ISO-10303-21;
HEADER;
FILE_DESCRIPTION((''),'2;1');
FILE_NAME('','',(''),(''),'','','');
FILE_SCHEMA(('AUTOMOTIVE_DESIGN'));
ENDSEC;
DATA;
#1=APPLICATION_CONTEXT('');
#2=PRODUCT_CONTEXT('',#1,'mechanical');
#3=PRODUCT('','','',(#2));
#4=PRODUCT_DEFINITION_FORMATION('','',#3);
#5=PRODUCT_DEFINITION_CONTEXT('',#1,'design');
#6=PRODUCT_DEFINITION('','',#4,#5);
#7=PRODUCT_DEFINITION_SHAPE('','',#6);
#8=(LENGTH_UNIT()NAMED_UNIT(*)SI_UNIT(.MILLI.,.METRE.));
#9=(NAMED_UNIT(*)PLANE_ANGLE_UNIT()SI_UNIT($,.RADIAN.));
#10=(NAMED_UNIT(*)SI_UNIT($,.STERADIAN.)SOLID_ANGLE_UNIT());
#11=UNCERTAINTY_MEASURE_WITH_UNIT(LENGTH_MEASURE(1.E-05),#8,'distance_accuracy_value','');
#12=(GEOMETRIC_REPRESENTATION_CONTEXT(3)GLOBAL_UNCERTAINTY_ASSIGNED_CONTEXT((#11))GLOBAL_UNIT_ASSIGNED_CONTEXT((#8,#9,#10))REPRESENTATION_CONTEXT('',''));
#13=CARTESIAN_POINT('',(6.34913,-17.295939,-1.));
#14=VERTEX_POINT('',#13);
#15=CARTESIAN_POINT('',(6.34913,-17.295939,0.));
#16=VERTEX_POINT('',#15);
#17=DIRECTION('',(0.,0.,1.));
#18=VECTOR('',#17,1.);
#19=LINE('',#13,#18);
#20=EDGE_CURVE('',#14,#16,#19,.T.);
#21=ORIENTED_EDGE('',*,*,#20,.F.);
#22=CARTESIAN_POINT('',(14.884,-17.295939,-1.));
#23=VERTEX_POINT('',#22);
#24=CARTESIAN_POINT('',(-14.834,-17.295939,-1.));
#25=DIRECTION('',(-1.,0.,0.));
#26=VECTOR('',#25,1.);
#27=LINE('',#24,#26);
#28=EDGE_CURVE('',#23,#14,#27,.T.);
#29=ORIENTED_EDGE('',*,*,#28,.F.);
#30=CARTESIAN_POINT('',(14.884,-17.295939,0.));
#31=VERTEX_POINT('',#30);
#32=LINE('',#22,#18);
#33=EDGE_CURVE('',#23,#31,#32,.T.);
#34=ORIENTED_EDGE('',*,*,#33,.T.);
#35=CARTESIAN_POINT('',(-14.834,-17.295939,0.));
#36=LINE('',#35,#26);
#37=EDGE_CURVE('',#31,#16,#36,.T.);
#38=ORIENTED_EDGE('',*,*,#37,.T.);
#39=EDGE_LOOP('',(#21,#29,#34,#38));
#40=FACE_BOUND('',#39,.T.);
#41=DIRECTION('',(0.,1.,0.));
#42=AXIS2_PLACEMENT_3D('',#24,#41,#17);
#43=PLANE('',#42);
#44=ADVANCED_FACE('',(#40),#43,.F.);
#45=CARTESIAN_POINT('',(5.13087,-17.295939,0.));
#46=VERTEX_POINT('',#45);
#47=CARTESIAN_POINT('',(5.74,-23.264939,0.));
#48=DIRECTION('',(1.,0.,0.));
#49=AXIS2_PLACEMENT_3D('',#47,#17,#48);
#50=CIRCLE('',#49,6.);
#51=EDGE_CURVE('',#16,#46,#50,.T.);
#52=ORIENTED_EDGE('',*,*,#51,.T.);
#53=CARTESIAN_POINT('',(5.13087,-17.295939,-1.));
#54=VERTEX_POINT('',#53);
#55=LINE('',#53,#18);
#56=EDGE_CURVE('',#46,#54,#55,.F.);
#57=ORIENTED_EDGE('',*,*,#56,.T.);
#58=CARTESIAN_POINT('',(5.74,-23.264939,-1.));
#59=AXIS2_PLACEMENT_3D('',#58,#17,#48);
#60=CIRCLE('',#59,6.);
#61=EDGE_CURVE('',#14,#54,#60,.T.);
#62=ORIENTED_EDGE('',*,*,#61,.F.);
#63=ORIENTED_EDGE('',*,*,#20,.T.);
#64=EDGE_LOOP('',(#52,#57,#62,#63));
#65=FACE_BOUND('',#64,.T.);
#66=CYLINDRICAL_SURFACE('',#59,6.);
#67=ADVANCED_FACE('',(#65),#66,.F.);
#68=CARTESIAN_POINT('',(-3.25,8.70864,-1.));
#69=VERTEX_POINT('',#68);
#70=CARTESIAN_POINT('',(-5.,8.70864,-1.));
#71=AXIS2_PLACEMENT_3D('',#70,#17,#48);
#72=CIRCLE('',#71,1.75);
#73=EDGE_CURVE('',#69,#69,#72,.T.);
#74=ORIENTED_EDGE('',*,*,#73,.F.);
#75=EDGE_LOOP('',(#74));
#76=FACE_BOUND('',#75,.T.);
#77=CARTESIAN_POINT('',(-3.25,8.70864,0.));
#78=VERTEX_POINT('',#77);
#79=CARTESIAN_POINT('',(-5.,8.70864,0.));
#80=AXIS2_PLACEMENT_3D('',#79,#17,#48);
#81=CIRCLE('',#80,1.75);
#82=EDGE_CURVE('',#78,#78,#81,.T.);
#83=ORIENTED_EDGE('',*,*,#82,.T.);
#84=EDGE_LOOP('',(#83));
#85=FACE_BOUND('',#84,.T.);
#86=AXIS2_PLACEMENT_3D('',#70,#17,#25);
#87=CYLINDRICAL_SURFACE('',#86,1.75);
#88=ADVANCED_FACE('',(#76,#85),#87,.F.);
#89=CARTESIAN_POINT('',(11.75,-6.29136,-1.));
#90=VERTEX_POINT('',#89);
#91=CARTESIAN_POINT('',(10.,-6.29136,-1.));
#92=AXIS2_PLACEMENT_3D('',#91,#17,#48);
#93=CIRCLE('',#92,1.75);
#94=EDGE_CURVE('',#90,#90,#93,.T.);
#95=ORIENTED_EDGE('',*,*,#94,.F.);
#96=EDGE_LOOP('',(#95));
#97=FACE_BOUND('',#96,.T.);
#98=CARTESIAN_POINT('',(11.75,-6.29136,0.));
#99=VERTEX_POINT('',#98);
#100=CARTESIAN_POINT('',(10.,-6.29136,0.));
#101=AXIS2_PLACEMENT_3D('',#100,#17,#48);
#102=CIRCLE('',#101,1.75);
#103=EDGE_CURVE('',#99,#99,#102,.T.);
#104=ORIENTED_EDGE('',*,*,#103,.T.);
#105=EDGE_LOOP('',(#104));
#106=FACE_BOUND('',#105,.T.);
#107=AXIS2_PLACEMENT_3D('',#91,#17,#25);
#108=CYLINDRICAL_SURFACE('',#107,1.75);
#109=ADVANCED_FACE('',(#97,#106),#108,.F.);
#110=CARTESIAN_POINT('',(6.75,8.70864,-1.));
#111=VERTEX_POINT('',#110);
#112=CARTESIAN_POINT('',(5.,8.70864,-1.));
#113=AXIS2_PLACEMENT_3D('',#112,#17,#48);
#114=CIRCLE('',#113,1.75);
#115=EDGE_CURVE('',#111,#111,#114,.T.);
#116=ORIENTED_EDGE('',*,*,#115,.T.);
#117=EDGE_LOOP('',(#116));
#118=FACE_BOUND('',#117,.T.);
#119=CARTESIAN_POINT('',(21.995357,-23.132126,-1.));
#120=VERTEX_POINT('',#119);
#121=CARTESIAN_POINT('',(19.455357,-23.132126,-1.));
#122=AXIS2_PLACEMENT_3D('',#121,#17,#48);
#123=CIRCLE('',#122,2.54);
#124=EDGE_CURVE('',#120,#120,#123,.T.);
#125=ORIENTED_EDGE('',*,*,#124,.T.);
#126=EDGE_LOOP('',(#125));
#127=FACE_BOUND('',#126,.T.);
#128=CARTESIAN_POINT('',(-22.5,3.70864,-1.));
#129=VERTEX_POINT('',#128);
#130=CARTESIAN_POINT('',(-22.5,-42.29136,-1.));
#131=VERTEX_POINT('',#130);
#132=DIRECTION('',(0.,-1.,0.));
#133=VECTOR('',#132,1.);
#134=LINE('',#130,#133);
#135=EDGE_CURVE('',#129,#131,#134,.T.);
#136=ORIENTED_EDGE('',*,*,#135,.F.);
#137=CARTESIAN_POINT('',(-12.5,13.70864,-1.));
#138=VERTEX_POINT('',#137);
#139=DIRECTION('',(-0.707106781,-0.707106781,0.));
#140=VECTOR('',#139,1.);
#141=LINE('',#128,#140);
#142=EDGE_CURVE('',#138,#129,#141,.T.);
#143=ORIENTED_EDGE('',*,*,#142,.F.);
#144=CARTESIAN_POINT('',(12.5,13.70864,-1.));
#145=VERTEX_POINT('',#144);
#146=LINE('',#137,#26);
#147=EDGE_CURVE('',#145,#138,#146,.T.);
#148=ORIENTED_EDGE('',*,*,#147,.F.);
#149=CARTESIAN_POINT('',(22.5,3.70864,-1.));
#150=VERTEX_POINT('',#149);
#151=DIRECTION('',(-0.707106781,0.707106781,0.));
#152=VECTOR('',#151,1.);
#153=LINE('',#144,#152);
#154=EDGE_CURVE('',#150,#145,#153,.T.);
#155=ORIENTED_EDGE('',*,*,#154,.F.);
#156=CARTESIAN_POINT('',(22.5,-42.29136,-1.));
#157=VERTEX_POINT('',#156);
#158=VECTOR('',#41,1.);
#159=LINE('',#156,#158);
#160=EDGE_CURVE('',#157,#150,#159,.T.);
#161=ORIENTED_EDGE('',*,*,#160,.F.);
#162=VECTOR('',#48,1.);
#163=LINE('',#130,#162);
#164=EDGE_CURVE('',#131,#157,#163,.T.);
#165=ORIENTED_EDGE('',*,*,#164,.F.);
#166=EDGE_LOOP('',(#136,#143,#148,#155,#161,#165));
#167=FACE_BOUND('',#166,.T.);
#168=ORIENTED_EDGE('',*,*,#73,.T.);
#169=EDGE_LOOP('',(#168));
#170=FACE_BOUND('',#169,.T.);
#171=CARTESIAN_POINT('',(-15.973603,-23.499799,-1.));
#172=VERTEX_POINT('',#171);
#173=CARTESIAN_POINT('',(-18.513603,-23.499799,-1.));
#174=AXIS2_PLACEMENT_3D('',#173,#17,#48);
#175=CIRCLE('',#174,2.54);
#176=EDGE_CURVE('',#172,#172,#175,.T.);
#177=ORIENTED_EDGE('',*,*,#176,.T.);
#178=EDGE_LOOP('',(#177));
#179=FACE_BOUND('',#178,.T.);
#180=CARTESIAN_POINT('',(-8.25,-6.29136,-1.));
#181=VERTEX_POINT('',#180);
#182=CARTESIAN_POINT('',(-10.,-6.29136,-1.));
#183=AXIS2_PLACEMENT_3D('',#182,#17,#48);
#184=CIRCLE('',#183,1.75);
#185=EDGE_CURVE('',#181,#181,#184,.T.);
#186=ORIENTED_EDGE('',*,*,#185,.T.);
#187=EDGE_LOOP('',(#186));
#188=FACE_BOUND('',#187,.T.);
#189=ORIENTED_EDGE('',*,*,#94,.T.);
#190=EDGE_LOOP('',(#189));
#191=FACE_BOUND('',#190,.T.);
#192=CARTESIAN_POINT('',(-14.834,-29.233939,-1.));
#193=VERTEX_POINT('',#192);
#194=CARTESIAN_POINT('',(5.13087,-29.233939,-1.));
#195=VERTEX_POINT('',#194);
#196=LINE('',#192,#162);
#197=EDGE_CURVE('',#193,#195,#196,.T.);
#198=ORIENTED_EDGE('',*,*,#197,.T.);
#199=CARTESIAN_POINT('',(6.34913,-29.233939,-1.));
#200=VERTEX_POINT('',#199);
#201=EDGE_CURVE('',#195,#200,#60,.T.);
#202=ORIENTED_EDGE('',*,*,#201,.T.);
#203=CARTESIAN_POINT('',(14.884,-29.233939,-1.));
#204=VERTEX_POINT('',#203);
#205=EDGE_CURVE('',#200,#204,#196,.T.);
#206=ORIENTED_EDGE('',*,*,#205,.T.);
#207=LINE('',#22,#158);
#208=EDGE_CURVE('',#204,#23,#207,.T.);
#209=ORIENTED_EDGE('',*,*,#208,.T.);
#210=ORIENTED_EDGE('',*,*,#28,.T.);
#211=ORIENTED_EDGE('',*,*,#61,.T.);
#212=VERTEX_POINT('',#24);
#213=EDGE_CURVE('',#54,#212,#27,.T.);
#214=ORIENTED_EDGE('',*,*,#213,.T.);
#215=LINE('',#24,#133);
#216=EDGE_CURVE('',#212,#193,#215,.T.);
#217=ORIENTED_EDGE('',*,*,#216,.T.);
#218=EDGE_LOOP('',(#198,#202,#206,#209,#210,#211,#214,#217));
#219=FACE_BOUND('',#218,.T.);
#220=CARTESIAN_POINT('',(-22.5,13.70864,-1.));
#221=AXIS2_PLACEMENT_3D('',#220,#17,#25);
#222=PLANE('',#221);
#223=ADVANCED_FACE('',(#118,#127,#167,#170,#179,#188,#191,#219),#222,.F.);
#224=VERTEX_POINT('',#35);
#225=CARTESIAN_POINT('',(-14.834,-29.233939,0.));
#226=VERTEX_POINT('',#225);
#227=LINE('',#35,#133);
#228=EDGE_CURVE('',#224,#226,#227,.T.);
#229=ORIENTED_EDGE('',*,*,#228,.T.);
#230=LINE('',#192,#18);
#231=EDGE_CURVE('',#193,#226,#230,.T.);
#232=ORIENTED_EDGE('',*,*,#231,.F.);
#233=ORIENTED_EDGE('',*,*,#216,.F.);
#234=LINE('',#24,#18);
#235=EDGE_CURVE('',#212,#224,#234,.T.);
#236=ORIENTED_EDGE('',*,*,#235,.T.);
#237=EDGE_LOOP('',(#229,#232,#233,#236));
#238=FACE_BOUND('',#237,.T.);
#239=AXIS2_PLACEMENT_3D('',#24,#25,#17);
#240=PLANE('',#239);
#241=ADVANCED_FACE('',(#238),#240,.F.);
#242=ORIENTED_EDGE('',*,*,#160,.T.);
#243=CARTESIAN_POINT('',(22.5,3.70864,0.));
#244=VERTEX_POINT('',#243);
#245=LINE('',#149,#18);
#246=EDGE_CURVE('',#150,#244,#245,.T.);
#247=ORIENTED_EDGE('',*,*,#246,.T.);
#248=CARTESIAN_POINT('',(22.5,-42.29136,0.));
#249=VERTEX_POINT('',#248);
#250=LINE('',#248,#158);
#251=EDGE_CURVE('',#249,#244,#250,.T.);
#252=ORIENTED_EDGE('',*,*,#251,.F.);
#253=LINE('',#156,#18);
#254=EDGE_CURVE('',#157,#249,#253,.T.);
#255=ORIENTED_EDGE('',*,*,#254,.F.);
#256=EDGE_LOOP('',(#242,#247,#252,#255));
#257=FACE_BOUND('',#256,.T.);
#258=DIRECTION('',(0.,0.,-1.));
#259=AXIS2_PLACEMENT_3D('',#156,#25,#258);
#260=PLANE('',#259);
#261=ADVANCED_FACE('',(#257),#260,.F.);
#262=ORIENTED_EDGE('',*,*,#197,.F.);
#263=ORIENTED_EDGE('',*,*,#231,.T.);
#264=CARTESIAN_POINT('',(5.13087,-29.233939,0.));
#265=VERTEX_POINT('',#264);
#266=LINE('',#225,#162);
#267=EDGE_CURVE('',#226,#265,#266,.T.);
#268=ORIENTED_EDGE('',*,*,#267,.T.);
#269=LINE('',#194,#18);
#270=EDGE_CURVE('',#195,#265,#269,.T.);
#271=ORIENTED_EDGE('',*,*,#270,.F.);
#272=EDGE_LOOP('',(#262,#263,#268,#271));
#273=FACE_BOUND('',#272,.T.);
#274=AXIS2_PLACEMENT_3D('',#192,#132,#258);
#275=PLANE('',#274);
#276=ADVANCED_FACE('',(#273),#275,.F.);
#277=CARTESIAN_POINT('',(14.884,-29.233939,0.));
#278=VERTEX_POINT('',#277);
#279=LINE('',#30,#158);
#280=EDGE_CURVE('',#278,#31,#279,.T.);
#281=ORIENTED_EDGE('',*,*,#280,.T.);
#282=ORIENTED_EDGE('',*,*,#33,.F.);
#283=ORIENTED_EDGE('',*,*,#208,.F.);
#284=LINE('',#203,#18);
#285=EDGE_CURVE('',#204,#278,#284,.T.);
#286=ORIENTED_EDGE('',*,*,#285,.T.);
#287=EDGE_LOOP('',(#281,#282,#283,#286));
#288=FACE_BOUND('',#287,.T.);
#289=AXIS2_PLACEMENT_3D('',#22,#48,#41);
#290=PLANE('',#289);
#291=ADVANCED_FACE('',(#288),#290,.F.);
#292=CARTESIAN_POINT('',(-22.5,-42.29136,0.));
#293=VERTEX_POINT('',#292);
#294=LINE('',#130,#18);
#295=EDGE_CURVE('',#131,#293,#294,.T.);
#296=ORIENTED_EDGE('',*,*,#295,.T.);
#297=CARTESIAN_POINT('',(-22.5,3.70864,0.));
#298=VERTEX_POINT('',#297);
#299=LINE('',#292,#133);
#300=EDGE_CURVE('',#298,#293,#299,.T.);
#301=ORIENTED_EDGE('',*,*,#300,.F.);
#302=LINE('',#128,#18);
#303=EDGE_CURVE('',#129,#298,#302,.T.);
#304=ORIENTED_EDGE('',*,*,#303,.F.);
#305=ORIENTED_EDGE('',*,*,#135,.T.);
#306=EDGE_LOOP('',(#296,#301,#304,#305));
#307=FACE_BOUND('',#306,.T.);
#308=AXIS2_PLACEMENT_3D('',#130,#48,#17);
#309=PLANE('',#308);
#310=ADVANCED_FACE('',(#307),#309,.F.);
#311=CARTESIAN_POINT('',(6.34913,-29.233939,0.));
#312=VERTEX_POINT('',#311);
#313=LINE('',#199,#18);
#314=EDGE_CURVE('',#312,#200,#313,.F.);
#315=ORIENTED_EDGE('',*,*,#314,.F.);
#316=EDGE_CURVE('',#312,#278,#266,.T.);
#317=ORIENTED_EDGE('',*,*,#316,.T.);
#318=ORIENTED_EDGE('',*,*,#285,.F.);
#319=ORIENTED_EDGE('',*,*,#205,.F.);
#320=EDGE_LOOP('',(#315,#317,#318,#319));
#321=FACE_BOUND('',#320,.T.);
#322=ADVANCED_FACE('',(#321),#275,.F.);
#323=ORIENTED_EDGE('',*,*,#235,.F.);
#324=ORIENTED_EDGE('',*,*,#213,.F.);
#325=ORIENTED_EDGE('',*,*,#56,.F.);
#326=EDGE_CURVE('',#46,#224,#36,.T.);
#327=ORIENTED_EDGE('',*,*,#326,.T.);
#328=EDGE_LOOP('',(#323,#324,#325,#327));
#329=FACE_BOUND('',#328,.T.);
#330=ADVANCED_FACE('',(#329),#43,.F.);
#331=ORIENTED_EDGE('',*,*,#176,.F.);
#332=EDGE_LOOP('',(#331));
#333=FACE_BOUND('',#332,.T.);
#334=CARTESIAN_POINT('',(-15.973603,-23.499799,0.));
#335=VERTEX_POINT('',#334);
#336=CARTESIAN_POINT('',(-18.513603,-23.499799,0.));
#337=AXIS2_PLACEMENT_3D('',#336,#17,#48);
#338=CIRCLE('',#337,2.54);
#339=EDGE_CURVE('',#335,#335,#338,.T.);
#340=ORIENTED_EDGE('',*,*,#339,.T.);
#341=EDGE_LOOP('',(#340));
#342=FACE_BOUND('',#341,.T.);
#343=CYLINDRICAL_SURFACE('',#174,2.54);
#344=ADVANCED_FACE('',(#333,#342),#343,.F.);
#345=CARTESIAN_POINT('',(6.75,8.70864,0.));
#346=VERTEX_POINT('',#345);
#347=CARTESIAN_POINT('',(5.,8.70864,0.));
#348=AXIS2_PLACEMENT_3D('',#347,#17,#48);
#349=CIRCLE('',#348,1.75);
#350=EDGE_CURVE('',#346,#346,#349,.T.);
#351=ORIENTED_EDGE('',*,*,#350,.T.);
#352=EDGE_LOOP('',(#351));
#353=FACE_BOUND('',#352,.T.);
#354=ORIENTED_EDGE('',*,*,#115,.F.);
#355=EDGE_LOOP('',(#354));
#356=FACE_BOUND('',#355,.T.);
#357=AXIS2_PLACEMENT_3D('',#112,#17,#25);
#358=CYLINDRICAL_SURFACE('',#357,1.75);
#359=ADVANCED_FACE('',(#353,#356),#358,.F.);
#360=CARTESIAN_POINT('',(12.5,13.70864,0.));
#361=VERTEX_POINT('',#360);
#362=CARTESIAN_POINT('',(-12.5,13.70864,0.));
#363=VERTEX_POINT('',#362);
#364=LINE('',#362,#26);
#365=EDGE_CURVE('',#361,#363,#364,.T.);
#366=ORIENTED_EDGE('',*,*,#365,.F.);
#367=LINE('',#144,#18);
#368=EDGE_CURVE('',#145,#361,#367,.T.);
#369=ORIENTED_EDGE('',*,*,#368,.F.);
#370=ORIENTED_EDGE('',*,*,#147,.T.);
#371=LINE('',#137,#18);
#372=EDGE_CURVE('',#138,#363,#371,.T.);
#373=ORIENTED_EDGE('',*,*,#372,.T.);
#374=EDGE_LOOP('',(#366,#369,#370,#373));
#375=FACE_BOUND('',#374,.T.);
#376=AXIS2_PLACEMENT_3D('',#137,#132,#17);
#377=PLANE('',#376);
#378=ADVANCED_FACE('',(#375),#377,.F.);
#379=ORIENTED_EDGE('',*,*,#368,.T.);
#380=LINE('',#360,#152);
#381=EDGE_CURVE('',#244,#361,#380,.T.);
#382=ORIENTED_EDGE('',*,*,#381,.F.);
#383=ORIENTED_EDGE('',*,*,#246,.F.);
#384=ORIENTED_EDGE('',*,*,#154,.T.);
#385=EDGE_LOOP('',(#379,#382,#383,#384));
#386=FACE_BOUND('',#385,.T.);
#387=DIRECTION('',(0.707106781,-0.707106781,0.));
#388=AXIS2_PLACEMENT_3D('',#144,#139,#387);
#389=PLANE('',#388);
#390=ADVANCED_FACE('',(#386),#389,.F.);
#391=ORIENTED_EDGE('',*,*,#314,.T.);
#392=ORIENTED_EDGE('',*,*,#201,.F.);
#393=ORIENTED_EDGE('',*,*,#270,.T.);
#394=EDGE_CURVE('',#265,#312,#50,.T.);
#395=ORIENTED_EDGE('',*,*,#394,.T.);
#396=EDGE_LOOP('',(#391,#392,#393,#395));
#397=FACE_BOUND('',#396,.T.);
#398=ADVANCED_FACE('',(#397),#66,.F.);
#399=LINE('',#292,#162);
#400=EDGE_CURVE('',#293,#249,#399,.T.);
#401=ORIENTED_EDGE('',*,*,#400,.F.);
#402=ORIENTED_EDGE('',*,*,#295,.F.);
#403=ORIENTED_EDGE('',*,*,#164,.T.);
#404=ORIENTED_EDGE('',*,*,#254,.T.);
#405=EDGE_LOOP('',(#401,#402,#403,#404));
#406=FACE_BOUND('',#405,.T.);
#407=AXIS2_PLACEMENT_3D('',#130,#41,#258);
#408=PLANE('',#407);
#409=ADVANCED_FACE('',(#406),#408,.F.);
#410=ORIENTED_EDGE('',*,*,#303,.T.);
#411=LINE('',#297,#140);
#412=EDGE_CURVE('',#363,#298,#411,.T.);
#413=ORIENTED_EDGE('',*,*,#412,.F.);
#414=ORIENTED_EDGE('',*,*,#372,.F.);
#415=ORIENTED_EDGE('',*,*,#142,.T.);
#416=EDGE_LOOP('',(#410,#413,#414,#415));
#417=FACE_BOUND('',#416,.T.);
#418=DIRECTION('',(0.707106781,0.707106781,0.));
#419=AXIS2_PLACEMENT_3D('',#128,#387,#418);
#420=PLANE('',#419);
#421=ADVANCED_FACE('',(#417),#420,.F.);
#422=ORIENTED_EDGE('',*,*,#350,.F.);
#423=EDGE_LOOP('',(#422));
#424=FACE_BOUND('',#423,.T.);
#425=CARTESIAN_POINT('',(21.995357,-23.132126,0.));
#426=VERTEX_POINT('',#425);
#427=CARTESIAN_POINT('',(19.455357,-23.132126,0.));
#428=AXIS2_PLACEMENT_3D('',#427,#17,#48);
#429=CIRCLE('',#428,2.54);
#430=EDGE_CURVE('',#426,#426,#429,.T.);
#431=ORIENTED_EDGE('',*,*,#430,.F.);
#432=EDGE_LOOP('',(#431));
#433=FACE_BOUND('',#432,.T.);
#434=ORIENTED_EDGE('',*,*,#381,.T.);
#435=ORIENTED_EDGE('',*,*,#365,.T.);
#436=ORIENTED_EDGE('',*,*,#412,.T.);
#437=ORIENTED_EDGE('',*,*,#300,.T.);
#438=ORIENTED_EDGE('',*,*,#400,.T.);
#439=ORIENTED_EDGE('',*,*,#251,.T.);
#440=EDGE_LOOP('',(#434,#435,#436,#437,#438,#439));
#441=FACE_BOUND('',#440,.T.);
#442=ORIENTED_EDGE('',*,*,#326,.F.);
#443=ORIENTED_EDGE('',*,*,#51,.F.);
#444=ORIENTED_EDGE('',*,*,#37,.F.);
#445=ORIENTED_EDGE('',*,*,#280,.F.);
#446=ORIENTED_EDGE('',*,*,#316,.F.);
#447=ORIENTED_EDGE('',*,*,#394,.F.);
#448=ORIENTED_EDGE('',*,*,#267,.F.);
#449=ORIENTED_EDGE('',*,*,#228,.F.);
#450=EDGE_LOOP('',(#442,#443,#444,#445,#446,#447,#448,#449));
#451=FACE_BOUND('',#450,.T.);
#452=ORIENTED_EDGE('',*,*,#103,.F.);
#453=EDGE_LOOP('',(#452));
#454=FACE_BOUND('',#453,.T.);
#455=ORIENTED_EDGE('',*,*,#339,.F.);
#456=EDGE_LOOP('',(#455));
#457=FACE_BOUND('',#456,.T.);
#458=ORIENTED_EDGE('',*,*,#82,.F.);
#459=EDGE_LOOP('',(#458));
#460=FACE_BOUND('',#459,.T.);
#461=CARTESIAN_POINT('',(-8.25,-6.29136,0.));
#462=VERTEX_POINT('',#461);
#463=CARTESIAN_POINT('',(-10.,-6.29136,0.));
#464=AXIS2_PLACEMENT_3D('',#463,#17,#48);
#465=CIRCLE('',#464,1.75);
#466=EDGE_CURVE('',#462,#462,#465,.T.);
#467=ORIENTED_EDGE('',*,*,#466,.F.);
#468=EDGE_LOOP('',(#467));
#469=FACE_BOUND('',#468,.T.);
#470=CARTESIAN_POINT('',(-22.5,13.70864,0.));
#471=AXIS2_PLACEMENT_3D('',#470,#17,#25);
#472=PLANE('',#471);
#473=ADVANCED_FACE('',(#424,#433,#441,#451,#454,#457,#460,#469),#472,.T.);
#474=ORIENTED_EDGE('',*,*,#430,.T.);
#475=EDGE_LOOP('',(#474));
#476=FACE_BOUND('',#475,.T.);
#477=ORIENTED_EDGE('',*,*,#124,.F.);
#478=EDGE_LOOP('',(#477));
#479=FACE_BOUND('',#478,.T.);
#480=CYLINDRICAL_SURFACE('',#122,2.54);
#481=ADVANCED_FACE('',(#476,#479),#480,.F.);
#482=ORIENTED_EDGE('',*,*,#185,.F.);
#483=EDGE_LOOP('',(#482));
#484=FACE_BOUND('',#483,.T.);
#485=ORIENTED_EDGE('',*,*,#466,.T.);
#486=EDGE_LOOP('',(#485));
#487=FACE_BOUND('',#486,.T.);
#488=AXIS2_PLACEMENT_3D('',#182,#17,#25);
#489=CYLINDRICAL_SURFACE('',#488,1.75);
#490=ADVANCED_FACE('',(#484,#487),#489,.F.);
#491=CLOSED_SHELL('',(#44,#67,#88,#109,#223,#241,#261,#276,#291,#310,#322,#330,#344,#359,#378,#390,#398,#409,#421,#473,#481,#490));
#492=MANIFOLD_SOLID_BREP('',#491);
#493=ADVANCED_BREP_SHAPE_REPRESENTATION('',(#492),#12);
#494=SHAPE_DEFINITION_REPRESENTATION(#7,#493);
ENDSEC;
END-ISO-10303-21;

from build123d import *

# Parameters (mm, degrees)
PIASTRAOUT_ESTRUSIONE_ESTRUSIONE1_START  = -1
PIASTRAOUT_ESTRUSIONE_ESTRUSIONE1_OUTL_R = 1.75
PIASTRAOUT_ESTRUSIONE_ESTRUSIONE1_DEPTH  = 1
SCHIZZO1_R                               = 6
TAGLIO_ESTRUSIONE1_DEPTH                 = 48.914602295
SCHIZZO2_R                               = 2.54
TAGLIO_ESTRUSIONE2_DEPTH                 = 48.914602295
SCHIZZO3_W                               = 29.718
SCHIZZO3_H                               = 11.938
TAGLIO_ESTRUSIONE3_DEPTH                 = 48.914602295


# Read off the part's stored shape, not the designer's step: <PiastraOUT>-<Estrusione-Estrusione1>
with BuildPart() as part:
    # <PiastraOUT>-<Estrusione-Estrusione1> outl → <PiastraOUT>-<Estrusione-Estrusione1> (new body)
    with BuildSketch(Plane.XY.offset(PIASTRAOUT_ESTRUSIONE_ESTRUSIONE1_START)):
        Polygon((-22.5, 3.708640208), (-22.5, -42.291359792), (22.5, -42.291359792), (22.5, 3.708640208), (12.5, 13.708640208), (-12.5, 13.708640208), align=None)
        with Locations((-10, -6.291359792)):
            Circle(PIASTRAOUT_ESTRUSIONE_ESTRUSIONE1_OUTL_R, mode=Mode.SUBTRACT)
        with Locations((-5, 8.708640208)):
            Circle(PIASTRAOUT_ESTRUSIONE_ESTRUSIONE1_OUTL_R, mode=Mode.SUBTRACT)
        with Locations((10, -6.291359792)):
            Circle(PIASTRAOUT_ESTRUSIONE_ESTRUSIONE1_OUTL_R, mode=Mode.SUBTRACT)
        with Locations((5, 8.708640208)):
            Circle(PIASTRAOUT_ESTRUSIONE_ESTRUSIONE1_OUTL_R, mode=Mode.SUBTRACT)
    extrude(amount=PIASTRAOUT_ESTRUSIONE_ESTRUSIONE1_DEPTH)

    # Schizzo1 → Taglio-Estrusione1 (cut, through all)
    with BuildSketch(Plane.XY):
        with Locations((5.74, -23.264939262)):
            Circle(SCHIZZO1_R)
    extrude(amount=-TAGLIO_ESTRUSIONE1_DEPTH, mode=Mode.SUBTRACT)

    # Schizzo2 → Taglio-Estrusione2 (cut, through all)
    with BuildSketch(Plane.XY):
        with Locations((-18.513603064, -23.499799375)):
            Circle(SCHIZZO2_R)
        with Locations((19.455356967, -23.132126406)):
            Circle(SCHIZZO2_R)
    extrude(amount=-TAGLIO_ESTRUSIONE2_DEPTH, mode=Mode.SUBTRACT)

    # Schizzo3 → Taglio-Estrusione3 (cut, through all)
    with BuildSketch(Plane.XY):
        with Locations((0.025, -23.264939262)):
            Rectangle(SCHIZZO3_W, SCHIZZO3_H)
    extrude(amount=-TAGLIO_ESTRUSIONE3_DEPTH, mode=Mode.SUBTRACT)


solid = part.part
